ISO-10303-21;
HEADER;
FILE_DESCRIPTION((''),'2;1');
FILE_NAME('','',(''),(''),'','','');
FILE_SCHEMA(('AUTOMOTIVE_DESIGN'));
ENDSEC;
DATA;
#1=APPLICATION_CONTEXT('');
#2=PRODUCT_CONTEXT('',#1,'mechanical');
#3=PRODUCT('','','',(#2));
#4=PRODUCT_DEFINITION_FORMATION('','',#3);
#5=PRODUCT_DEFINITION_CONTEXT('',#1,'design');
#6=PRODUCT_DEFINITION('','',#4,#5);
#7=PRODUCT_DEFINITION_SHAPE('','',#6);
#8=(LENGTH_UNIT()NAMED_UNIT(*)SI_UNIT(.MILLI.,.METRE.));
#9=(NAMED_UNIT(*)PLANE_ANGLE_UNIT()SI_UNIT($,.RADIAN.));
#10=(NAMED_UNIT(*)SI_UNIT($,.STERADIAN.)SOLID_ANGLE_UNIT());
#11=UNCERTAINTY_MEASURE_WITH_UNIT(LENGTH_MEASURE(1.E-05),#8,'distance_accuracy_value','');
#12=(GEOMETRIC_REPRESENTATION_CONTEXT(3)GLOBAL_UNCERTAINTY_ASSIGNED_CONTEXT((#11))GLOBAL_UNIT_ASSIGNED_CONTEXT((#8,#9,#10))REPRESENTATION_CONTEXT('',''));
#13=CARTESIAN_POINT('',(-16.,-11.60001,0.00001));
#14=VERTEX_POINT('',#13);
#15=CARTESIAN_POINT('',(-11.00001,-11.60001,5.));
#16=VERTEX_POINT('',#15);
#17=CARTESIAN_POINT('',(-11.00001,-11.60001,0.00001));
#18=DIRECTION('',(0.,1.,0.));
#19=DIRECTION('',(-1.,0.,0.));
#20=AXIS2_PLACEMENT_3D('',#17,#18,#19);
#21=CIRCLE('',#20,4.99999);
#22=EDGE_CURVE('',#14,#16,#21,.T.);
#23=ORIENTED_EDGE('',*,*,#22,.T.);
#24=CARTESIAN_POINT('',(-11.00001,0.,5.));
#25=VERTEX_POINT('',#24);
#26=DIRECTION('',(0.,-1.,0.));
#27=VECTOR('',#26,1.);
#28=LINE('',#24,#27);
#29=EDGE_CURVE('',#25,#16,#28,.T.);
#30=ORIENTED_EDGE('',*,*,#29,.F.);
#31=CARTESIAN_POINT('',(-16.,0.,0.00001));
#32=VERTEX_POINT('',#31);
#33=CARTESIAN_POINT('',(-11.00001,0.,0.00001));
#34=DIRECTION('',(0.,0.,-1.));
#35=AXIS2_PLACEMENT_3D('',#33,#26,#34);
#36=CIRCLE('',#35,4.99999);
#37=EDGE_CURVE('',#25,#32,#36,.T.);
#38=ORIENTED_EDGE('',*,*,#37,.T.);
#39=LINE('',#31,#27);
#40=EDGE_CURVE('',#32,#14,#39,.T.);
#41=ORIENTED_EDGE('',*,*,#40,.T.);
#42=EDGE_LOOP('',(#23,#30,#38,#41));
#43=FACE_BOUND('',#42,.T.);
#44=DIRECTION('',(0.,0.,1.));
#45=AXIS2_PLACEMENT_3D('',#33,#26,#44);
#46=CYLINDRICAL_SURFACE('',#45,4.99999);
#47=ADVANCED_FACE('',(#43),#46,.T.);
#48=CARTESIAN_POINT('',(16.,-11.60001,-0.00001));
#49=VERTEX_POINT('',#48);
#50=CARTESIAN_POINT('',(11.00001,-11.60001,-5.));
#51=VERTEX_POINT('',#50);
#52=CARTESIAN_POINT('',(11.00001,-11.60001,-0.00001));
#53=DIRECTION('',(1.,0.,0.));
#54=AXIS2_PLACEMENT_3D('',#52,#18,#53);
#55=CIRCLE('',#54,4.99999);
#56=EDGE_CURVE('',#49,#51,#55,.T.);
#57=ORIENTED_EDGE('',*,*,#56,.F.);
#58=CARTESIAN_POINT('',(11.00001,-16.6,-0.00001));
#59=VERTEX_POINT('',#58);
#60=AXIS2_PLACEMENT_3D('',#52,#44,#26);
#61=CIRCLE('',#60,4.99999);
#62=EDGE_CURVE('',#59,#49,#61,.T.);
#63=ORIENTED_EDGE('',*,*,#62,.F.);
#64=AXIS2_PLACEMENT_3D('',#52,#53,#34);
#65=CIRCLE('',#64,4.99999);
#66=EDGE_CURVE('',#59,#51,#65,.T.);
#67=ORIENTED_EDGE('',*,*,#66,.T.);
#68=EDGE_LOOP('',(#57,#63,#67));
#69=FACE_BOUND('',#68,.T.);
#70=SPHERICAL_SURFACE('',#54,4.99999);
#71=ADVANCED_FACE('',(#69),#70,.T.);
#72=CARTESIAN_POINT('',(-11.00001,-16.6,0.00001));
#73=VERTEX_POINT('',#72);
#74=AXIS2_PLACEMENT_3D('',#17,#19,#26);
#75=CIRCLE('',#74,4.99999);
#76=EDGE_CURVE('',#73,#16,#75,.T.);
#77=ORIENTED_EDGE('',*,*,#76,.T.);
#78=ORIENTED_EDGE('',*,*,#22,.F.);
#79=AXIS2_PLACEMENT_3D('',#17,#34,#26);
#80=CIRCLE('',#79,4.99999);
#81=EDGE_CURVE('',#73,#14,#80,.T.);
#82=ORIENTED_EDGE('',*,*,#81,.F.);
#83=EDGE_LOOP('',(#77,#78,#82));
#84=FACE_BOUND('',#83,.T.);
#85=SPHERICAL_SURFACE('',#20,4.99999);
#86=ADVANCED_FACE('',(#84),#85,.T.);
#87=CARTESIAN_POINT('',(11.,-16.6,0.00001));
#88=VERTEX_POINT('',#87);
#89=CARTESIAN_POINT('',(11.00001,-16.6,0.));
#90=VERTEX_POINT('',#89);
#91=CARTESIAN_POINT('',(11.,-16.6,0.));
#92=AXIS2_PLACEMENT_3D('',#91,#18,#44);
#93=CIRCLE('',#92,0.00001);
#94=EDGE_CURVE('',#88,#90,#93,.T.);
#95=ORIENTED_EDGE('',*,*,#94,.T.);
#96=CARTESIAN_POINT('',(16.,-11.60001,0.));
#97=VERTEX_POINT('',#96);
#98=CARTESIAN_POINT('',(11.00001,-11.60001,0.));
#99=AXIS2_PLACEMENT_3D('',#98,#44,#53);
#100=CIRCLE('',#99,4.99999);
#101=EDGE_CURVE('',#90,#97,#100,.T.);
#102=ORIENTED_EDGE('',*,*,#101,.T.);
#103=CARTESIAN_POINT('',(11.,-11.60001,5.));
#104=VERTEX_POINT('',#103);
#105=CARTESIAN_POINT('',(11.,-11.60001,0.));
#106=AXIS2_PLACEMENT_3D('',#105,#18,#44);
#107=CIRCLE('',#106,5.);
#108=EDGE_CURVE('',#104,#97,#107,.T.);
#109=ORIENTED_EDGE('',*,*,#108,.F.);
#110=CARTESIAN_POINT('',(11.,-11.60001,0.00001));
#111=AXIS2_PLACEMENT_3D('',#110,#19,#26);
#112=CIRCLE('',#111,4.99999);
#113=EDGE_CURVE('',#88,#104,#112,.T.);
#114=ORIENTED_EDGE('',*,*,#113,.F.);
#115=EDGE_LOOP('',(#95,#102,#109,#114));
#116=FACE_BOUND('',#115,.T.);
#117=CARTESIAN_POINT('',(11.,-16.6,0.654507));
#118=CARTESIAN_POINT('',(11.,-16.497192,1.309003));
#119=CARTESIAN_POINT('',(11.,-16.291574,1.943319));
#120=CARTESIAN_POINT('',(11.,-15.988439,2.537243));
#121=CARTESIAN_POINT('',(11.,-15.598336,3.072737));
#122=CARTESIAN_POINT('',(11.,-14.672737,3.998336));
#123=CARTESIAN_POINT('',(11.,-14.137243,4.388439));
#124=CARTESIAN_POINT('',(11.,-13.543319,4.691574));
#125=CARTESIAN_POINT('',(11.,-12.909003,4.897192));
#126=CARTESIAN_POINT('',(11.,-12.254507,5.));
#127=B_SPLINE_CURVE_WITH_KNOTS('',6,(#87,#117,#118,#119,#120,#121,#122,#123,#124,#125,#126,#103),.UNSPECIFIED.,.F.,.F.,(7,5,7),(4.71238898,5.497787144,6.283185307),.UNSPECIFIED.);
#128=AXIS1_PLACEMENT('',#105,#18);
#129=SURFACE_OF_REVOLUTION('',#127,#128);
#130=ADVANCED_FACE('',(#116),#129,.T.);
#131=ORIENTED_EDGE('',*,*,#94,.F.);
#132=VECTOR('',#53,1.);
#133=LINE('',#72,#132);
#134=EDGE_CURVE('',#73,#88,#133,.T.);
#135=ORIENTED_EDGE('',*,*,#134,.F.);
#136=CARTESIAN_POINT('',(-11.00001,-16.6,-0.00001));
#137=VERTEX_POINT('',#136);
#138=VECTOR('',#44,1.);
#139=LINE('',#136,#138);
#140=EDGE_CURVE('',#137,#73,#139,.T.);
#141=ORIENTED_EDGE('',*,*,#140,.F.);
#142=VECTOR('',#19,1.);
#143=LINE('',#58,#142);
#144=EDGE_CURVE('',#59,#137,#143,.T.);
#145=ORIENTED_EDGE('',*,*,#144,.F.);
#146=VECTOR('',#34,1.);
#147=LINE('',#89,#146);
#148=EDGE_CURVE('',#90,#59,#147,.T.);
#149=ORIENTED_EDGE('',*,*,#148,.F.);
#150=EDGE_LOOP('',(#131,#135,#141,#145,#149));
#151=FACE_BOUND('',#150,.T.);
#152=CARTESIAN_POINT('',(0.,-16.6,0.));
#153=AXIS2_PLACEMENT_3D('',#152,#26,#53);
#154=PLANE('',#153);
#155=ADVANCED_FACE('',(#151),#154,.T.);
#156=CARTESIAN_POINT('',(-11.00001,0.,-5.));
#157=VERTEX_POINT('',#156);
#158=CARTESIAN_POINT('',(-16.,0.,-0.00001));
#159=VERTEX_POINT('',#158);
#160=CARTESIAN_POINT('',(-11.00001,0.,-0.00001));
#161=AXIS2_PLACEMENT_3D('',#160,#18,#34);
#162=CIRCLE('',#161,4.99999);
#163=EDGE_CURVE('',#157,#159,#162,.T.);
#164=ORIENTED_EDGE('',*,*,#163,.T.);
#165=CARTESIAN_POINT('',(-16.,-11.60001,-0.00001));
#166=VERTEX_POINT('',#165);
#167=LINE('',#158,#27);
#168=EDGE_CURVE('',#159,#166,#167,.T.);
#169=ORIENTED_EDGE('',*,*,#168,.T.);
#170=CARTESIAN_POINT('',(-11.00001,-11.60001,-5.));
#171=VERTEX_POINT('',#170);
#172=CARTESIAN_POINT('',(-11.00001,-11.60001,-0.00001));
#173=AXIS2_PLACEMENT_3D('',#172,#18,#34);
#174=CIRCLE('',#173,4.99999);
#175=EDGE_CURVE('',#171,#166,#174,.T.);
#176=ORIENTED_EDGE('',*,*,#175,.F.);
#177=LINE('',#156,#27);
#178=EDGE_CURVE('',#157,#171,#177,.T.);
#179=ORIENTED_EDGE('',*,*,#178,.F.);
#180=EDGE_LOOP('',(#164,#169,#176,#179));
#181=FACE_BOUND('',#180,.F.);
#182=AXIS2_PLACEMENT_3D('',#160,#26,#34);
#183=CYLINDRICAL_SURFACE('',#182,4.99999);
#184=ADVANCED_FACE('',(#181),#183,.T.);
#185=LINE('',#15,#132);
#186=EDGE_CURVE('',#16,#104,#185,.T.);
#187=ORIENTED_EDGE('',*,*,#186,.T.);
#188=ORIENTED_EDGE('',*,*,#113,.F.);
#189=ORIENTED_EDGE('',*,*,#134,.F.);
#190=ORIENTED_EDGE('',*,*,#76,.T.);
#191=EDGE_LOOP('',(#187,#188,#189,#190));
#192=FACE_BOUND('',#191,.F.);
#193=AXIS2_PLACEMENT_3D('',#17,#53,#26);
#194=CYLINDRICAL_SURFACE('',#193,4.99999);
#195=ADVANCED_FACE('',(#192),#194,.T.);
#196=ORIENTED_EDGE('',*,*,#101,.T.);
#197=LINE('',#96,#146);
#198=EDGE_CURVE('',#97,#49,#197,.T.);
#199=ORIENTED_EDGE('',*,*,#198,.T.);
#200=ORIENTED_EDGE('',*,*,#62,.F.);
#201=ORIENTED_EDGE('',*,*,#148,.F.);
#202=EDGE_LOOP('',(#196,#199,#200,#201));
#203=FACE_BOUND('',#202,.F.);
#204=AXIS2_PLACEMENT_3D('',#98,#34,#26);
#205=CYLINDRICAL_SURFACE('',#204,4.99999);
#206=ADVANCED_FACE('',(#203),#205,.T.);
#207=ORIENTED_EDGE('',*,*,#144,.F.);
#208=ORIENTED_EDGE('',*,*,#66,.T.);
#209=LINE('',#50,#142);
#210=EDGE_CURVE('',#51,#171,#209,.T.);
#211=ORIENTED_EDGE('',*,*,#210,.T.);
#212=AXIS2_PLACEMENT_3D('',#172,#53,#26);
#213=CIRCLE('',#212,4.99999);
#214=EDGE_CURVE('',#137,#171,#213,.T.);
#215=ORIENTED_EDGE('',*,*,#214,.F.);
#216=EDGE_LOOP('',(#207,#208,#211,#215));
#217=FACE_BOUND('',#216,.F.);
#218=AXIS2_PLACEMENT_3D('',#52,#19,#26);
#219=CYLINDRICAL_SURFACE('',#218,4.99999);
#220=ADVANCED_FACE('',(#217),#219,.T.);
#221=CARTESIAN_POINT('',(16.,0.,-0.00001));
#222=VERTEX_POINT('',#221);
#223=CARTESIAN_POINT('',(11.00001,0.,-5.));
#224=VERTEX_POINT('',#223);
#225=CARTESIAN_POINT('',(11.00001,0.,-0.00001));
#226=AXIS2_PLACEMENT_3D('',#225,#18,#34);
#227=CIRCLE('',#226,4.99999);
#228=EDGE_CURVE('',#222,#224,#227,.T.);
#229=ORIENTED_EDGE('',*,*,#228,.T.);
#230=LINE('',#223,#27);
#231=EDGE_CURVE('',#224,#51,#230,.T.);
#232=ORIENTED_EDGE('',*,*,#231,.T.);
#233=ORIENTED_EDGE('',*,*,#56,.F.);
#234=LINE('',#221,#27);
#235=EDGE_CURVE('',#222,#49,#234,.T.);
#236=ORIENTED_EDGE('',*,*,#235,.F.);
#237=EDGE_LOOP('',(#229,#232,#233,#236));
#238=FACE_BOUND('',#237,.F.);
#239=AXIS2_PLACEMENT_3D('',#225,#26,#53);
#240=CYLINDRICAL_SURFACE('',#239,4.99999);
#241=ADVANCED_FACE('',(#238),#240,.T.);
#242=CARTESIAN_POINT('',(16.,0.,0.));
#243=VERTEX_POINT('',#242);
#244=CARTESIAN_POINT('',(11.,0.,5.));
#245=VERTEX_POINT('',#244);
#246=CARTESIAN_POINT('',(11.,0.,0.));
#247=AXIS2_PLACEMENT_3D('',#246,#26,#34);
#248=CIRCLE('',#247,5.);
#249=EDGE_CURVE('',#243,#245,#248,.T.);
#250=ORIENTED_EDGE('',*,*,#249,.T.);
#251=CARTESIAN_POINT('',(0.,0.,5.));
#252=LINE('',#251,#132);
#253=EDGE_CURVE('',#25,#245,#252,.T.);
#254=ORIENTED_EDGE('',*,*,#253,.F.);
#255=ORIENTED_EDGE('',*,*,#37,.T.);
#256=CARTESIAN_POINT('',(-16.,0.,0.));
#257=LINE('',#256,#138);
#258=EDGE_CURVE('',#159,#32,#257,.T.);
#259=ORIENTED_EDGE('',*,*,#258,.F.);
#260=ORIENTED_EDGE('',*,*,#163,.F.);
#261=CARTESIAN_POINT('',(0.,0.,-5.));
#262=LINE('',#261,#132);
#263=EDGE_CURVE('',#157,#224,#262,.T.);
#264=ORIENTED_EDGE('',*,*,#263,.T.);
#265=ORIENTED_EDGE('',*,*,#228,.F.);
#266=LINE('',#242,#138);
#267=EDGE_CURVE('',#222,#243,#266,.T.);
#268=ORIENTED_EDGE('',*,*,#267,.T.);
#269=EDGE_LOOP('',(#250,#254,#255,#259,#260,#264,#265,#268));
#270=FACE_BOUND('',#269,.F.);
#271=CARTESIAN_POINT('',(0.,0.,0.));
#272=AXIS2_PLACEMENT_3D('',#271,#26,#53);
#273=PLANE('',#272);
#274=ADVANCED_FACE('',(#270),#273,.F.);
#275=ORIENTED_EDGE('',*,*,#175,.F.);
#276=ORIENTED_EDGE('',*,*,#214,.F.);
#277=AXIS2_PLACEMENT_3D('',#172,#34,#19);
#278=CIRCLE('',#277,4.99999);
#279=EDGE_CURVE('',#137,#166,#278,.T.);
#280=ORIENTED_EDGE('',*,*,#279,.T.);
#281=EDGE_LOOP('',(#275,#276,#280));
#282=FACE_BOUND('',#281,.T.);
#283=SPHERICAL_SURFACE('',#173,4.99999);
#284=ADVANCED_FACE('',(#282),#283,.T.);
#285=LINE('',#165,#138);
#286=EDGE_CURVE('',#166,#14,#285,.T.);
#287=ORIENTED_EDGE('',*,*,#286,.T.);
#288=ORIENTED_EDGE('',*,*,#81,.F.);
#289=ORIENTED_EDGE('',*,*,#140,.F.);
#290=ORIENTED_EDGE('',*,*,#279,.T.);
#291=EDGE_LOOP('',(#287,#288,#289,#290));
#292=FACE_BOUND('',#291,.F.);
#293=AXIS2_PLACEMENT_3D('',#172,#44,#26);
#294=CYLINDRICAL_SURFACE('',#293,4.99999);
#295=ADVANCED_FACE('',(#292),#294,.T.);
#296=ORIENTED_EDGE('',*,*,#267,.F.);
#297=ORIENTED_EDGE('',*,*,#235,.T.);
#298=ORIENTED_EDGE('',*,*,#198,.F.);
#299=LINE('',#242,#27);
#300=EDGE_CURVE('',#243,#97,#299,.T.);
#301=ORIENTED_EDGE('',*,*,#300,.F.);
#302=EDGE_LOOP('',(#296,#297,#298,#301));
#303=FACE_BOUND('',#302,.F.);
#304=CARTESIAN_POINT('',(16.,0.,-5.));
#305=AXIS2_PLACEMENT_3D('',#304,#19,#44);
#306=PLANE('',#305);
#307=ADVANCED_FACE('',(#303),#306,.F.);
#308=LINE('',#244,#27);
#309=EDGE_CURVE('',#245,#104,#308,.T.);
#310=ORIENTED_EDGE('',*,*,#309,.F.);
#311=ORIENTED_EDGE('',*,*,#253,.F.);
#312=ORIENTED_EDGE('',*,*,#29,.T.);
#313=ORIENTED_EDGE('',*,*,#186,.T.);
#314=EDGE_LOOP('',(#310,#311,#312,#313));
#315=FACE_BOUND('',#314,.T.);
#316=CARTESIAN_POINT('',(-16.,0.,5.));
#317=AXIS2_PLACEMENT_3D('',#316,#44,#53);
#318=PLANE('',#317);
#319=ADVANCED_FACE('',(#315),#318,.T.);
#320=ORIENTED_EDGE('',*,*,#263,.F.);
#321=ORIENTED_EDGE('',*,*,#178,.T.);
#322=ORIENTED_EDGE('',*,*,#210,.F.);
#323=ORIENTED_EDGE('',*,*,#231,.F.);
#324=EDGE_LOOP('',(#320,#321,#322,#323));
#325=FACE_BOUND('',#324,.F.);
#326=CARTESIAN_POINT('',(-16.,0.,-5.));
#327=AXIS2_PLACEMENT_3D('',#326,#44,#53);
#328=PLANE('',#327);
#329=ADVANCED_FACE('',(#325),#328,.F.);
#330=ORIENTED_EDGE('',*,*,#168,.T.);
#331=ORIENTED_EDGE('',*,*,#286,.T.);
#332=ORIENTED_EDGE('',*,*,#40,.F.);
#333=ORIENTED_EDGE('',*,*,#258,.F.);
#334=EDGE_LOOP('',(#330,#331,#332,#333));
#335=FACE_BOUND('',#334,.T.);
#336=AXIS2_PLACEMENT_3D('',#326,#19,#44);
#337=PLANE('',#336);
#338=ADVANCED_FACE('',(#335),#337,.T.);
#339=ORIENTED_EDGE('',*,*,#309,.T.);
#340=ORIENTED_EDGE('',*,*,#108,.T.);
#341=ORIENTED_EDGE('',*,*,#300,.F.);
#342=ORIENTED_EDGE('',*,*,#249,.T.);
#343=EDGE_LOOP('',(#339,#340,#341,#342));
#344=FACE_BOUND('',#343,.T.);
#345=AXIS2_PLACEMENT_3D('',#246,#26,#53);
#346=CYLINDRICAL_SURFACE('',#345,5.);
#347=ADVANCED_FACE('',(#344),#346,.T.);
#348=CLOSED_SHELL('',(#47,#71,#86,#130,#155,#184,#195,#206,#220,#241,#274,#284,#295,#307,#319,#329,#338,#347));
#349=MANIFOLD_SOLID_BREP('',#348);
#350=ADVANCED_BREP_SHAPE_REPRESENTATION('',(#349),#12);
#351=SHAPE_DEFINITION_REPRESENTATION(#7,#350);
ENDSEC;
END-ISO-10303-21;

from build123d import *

# Parameters (mm, degrees)
F0_W     = 32
F0_H     = 10
F1_DEPTH = 16.6
F2_R     = 5
F3_R     = 4.99999
F4_R     = 4.99999


# Not quite as in the source:
# - a fillet or chamfer is up to 0.001 mm smaller than in the source, because OpenCascade refuses the exact size


with BuildPart() as f1:
    # F0 (on Front) → F1 (new body)
    with BuildSketch(Plane.XZ):
        Rectangle(F0_W, F0_H)
    extrude(amount=F1_DEPTH)

    # F2
    f2_edges = [f1.edges().sort_by_distance(p)[0] for p in [
        (16, -8.3, 5),
    ]]
    fillet(f2_edges, radius=F2_R)

    # F3 (radius 5 in the source; OpenCascade refuses exactly that, so slightly less here)
    f3_edges = [f1.edges().sort_by_distance(p)[0] for p in [
        (-16, -8.3, 5),
        (16, -8.3, -5),
        (-16, -8.3, -5),
    ]]
    fillet(f3_edges, radius=F3_R)

    # F4 (radius 5 in the source; OpenCascade refuses exactly that, so slightly less here)
    f4_edges = [f1.edges().sort_by_distance(p)[0] for p in [
        (-5e-06, -16.6, 5),
    ]]
    fillet(f4_edges, radius=F4_R)


solid = f1.part
